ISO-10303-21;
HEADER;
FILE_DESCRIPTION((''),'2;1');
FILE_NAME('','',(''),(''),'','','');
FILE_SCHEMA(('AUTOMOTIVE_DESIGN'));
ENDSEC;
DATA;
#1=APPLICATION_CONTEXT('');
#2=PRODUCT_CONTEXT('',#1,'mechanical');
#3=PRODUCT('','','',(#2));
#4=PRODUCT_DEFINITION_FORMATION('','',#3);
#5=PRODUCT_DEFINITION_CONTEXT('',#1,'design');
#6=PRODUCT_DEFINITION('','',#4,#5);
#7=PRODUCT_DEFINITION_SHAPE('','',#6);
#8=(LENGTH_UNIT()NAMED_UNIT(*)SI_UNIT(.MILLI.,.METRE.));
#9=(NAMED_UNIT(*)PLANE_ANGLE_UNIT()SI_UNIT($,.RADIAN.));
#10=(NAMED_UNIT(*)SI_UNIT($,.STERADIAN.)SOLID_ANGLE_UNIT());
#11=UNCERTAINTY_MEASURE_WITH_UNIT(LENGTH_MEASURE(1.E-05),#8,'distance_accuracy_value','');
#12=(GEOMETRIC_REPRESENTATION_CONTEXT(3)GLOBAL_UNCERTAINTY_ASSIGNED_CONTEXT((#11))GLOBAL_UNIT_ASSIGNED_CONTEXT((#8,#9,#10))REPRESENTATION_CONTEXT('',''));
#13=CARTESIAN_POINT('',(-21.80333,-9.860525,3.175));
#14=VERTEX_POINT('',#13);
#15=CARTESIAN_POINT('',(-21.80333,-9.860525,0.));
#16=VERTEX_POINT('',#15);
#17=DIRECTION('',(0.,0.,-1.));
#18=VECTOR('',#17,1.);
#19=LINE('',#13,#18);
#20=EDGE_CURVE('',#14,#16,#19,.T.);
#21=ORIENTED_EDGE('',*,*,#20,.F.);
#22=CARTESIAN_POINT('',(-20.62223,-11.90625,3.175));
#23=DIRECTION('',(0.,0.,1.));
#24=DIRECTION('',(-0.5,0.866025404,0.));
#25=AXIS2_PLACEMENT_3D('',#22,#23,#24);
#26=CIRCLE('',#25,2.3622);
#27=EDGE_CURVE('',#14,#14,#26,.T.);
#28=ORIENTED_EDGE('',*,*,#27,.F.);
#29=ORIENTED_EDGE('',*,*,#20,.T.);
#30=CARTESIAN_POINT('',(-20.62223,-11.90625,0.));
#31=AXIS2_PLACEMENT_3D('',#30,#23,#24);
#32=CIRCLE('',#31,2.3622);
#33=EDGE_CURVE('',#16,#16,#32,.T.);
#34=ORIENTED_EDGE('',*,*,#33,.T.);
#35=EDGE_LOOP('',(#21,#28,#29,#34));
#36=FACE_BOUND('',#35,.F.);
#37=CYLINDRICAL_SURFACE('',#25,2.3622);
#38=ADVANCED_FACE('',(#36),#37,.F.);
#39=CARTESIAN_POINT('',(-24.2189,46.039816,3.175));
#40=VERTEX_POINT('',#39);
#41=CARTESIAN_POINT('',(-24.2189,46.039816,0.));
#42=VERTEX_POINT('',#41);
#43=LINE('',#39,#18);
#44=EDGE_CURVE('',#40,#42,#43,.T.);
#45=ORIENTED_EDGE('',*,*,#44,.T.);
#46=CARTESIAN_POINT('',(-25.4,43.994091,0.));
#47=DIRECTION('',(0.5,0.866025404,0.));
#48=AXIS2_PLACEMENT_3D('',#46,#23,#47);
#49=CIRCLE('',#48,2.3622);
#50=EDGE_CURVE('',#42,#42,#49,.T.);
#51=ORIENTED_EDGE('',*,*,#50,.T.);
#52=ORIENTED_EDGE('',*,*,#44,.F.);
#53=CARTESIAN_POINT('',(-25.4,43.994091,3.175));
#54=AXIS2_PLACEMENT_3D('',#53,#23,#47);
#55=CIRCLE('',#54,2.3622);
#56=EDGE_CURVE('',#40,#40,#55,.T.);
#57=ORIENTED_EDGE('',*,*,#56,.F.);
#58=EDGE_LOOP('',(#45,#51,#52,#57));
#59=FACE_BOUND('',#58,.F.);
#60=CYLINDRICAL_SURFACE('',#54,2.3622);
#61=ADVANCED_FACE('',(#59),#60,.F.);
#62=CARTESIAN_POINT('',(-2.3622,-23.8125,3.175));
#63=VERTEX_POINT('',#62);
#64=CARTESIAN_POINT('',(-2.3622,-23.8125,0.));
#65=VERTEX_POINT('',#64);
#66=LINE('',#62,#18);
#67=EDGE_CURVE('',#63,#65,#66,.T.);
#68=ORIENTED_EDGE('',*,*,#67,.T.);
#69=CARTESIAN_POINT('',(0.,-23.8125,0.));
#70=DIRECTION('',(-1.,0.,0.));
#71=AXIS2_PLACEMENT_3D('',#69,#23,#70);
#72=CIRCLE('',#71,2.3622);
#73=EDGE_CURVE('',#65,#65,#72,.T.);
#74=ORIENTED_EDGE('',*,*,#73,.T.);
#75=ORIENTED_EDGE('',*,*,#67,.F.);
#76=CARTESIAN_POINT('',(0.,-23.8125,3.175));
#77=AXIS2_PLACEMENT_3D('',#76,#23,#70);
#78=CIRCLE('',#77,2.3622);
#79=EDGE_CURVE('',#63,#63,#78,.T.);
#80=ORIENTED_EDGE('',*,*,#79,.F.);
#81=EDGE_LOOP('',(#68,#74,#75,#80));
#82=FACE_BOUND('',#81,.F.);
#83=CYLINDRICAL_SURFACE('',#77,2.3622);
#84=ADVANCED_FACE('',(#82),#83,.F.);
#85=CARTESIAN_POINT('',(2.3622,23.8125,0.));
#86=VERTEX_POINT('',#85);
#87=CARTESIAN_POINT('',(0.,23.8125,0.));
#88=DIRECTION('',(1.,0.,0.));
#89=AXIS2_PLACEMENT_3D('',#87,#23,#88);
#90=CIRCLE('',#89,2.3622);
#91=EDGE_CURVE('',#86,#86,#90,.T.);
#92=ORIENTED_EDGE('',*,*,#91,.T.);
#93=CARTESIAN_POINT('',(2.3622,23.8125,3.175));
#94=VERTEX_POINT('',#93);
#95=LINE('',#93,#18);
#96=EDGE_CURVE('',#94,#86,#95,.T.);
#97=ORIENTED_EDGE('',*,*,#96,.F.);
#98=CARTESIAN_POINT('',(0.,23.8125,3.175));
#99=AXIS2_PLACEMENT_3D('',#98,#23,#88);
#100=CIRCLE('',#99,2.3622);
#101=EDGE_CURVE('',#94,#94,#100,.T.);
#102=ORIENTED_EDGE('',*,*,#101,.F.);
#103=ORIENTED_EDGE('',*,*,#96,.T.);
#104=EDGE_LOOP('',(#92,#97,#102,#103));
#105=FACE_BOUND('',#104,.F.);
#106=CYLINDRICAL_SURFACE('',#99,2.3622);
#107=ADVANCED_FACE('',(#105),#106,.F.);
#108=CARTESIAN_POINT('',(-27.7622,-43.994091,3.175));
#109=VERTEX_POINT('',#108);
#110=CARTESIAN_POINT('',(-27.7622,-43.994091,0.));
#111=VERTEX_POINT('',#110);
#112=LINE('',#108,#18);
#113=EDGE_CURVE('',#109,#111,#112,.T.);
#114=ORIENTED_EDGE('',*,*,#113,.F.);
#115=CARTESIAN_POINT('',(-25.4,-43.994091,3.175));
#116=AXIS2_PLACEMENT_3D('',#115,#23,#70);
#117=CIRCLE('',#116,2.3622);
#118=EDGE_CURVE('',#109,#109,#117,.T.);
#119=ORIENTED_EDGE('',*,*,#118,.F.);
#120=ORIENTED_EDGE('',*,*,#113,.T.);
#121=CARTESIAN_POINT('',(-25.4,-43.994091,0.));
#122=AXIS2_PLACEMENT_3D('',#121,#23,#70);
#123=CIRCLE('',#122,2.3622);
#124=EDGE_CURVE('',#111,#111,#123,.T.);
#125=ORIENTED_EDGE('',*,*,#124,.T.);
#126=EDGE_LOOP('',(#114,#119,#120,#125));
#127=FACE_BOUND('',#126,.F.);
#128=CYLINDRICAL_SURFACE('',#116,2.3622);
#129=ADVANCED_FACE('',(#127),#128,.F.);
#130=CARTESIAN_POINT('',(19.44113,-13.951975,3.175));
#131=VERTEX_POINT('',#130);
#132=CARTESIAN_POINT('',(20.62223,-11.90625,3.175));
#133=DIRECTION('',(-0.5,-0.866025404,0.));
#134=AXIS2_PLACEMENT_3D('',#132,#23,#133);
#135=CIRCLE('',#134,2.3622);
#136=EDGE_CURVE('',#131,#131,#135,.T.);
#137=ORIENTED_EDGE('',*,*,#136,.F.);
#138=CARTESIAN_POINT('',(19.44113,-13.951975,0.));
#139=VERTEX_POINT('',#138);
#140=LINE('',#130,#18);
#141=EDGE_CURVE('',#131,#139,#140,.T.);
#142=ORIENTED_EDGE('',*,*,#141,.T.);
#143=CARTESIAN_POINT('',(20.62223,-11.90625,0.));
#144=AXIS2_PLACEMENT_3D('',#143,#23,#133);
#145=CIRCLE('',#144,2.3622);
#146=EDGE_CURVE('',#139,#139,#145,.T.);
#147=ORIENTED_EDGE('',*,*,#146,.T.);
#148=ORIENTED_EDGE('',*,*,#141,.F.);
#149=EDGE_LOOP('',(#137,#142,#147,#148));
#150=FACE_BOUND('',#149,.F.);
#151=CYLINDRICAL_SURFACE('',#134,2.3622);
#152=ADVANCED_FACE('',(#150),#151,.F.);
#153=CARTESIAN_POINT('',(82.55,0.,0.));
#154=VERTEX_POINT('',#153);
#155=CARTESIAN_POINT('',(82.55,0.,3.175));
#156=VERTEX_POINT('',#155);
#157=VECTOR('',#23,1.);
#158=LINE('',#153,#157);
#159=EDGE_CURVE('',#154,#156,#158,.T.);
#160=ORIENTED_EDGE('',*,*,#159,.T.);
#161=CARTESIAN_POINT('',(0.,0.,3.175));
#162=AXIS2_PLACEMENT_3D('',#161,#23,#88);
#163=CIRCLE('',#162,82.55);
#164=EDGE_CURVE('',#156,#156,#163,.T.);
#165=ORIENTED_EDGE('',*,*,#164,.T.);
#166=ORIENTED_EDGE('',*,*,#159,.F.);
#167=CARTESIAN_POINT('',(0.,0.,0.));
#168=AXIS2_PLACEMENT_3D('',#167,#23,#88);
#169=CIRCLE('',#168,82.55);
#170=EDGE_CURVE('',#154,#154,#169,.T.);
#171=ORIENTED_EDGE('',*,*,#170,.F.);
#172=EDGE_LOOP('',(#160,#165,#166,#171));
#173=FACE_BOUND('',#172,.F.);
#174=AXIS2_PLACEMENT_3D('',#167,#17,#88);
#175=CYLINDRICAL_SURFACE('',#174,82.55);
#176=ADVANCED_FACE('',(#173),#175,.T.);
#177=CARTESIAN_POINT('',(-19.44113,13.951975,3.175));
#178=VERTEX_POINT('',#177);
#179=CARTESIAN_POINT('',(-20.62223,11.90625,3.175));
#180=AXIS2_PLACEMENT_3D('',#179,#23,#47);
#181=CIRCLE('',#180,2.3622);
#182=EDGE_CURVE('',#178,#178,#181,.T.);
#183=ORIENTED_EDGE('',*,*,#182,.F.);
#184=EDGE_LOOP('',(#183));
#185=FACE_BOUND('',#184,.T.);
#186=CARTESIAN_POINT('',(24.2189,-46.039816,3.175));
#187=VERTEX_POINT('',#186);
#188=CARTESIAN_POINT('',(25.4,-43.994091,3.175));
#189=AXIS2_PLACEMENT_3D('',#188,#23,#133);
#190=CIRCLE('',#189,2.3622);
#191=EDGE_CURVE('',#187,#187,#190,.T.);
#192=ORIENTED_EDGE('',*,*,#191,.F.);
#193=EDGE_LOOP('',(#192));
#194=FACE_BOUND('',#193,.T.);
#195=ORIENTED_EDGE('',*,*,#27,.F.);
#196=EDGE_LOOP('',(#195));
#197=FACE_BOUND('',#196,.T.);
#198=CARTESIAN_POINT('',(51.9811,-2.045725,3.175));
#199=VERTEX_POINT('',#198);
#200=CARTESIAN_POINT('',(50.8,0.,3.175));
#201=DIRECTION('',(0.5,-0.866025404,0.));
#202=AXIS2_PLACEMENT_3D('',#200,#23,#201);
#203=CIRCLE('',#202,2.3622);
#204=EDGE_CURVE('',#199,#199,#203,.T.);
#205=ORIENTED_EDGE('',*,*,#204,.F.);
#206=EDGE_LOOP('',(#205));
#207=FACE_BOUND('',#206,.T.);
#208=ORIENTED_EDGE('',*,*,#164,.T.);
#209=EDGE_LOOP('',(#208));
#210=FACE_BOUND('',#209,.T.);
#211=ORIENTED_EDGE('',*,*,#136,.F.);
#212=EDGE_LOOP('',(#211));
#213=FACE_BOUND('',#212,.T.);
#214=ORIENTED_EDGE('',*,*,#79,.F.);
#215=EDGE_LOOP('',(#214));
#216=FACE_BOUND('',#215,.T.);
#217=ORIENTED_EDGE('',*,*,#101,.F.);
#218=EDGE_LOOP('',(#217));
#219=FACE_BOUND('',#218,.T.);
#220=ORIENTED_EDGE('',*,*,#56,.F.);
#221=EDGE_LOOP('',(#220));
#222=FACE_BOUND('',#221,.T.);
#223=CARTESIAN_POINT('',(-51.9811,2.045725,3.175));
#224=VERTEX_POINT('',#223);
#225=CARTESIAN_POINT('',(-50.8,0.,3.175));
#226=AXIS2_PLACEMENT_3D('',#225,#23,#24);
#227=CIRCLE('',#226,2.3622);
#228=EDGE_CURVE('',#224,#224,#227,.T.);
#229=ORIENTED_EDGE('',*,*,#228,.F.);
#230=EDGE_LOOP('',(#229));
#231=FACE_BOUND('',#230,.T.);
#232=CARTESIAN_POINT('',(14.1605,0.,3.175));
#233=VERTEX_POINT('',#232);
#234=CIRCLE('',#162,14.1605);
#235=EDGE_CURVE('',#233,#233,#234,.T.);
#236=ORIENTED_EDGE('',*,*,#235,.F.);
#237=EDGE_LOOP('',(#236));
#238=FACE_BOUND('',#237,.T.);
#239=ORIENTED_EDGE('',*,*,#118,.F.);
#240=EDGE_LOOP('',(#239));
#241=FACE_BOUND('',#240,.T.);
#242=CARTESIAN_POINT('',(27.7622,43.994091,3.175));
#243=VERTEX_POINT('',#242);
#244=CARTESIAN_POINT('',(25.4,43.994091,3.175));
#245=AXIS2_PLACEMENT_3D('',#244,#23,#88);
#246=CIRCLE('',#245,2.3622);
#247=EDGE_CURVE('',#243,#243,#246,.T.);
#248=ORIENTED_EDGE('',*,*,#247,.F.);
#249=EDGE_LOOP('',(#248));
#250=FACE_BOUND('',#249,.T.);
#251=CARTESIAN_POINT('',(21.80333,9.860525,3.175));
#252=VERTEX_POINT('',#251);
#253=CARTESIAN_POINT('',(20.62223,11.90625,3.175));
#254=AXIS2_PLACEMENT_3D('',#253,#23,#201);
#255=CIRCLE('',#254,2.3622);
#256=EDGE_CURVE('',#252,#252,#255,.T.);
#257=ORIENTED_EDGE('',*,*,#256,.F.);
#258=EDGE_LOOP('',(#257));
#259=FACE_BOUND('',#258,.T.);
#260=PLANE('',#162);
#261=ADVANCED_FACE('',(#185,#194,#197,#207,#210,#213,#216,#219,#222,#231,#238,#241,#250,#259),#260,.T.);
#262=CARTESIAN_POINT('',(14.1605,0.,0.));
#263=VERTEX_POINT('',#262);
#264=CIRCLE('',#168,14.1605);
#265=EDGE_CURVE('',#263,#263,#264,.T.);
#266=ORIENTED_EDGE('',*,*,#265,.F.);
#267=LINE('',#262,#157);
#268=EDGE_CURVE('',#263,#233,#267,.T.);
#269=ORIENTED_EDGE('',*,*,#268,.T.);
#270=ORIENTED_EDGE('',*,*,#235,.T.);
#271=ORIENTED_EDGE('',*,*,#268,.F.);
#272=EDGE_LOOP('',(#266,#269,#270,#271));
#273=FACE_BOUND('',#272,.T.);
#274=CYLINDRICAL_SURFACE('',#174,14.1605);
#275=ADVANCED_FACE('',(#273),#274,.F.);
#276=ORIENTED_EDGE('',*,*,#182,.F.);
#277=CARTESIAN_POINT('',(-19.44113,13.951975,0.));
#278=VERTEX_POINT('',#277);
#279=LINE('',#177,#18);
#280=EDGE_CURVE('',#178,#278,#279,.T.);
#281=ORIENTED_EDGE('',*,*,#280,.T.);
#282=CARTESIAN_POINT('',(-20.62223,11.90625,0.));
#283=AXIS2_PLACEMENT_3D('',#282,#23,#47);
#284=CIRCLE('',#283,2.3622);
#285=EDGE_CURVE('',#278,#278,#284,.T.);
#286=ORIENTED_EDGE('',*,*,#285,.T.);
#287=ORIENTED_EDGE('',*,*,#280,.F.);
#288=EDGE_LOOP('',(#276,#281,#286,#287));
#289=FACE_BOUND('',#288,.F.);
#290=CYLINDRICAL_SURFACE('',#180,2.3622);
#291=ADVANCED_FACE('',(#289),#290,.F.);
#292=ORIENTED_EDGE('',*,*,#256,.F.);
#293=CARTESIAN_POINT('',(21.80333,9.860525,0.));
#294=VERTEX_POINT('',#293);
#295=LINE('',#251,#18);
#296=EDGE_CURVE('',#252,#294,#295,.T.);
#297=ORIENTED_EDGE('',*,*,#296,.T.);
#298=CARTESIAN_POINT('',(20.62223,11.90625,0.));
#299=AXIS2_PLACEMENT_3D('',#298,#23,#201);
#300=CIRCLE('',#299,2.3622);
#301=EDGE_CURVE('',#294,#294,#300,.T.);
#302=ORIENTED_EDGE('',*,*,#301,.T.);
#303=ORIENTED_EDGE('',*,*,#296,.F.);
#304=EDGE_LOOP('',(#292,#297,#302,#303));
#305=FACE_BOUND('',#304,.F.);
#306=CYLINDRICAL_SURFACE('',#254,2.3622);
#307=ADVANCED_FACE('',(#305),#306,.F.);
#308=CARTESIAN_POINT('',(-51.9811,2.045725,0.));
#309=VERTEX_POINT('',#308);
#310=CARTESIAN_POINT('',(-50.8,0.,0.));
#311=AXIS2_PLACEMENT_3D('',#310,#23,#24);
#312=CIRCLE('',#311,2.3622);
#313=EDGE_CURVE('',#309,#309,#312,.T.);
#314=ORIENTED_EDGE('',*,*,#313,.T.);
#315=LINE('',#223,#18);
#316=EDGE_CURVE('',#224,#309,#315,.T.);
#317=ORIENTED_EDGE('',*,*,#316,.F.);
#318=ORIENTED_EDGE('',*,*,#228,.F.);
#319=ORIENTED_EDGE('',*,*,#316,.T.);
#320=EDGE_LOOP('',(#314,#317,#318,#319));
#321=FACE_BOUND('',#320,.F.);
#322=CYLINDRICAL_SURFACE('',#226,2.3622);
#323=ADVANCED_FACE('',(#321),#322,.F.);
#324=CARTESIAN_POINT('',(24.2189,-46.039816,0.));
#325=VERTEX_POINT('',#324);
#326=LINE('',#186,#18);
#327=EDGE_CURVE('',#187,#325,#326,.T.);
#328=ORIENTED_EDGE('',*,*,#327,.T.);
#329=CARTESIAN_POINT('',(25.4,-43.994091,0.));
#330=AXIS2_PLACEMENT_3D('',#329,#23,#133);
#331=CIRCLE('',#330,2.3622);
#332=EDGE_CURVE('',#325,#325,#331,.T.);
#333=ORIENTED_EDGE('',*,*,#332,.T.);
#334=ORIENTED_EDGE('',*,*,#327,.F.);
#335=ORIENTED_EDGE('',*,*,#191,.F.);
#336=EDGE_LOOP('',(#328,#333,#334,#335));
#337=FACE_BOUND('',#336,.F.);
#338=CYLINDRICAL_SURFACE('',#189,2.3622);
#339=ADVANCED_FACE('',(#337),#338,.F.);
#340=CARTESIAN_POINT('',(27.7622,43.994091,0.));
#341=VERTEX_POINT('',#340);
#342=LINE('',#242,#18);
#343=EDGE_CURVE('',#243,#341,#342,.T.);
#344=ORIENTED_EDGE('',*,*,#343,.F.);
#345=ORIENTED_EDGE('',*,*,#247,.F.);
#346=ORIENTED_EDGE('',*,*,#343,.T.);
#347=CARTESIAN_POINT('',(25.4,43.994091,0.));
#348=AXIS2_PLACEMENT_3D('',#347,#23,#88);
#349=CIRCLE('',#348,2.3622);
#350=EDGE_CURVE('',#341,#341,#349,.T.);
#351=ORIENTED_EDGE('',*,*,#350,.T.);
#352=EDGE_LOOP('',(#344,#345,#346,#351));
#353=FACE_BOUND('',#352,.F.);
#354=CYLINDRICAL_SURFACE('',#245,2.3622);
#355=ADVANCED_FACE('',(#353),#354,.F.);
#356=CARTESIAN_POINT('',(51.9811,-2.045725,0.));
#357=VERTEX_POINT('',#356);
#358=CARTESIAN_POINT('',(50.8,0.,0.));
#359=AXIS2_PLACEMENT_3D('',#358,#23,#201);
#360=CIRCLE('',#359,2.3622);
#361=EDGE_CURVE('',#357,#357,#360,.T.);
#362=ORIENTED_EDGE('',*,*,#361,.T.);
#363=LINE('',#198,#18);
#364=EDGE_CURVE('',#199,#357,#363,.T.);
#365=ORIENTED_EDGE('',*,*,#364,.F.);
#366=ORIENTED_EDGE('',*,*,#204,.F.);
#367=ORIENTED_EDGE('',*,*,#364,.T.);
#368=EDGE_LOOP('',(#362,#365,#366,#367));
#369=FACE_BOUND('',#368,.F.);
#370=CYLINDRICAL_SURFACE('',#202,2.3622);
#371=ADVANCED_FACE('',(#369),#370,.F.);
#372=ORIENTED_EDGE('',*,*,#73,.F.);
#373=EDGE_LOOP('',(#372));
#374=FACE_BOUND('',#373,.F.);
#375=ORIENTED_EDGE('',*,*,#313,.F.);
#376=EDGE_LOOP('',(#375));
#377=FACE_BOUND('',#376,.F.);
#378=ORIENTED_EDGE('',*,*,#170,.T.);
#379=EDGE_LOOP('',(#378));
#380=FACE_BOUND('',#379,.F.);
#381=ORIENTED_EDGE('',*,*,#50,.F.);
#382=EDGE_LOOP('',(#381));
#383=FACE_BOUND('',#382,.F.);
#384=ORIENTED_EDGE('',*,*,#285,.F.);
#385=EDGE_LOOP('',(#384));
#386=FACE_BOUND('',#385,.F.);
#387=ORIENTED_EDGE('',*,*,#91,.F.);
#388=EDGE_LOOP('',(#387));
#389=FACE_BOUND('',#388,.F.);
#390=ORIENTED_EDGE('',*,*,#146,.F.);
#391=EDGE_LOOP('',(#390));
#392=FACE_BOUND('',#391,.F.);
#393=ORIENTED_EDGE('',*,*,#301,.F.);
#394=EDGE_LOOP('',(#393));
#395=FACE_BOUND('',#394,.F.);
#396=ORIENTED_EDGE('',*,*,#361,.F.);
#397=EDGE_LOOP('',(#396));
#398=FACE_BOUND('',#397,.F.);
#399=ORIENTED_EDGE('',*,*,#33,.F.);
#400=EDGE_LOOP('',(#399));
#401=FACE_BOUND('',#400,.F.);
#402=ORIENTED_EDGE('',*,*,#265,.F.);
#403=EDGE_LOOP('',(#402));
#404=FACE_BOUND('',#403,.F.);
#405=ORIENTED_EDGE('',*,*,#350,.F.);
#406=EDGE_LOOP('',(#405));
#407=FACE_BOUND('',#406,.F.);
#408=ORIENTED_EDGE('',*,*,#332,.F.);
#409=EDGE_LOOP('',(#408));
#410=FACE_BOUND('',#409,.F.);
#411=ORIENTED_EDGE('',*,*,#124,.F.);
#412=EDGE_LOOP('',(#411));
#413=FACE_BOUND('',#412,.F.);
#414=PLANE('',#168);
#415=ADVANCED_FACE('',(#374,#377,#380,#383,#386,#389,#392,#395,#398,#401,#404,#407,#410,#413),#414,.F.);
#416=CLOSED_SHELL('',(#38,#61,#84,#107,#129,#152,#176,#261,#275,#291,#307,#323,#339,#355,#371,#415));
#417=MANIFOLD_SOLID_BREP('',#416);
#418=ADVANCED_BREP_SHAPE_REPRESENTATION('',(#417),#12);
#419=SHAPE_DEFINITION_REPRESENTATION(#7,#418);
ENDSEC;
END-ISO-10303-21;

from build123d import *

# Parameters (mm, degrees)
F0_R            = 82.55
F0_R_2          = 14.1605
F1_DEPTH        = 3.175
F2_R            = 2.3622
F3_DEPTH        = 3.176
F3_COPIES_COUNT = 6


# Not quite as in the source:
# - a pattern or mirror of a feature is missing from the dataset's text; its kind, count and spacing are read off the source's solid


with BuildPart() as f1:
    # F0 (on Top) → F1 (new body)
    with BuildSketch(Plane.XY):
        Circle(F0_R)
        Circle(F0_R_2, mode=Mode.SUBTRACT)
    extrude(amount=F1_DEPTH)

    # F2 (on face) → F3 (cut, through all)
    with BuildSketch(Plane.XY.offset(3.175)):
        with Locations((0, 23.8125)):
            Circle(F2_R)
        with Locations((25.4, 43.9940905122)):
            Circle(F2_R)
    f3 = extrude(amount=-F3_DEPTH, mode=Mode.SUBTRACT)

    # F3_copies: F3 ×6 about axis
    f3_copies_axis = Axis((0, 0, 0), (0, 0, 1))
    for i in range(1, F3_COPIES_COUNT):
        add(f3.rotate(f3_copies_axis, i * 360 / F3_COPIES_COUNT), mode=Mode.SUBTRACT)


solid = f1.part
